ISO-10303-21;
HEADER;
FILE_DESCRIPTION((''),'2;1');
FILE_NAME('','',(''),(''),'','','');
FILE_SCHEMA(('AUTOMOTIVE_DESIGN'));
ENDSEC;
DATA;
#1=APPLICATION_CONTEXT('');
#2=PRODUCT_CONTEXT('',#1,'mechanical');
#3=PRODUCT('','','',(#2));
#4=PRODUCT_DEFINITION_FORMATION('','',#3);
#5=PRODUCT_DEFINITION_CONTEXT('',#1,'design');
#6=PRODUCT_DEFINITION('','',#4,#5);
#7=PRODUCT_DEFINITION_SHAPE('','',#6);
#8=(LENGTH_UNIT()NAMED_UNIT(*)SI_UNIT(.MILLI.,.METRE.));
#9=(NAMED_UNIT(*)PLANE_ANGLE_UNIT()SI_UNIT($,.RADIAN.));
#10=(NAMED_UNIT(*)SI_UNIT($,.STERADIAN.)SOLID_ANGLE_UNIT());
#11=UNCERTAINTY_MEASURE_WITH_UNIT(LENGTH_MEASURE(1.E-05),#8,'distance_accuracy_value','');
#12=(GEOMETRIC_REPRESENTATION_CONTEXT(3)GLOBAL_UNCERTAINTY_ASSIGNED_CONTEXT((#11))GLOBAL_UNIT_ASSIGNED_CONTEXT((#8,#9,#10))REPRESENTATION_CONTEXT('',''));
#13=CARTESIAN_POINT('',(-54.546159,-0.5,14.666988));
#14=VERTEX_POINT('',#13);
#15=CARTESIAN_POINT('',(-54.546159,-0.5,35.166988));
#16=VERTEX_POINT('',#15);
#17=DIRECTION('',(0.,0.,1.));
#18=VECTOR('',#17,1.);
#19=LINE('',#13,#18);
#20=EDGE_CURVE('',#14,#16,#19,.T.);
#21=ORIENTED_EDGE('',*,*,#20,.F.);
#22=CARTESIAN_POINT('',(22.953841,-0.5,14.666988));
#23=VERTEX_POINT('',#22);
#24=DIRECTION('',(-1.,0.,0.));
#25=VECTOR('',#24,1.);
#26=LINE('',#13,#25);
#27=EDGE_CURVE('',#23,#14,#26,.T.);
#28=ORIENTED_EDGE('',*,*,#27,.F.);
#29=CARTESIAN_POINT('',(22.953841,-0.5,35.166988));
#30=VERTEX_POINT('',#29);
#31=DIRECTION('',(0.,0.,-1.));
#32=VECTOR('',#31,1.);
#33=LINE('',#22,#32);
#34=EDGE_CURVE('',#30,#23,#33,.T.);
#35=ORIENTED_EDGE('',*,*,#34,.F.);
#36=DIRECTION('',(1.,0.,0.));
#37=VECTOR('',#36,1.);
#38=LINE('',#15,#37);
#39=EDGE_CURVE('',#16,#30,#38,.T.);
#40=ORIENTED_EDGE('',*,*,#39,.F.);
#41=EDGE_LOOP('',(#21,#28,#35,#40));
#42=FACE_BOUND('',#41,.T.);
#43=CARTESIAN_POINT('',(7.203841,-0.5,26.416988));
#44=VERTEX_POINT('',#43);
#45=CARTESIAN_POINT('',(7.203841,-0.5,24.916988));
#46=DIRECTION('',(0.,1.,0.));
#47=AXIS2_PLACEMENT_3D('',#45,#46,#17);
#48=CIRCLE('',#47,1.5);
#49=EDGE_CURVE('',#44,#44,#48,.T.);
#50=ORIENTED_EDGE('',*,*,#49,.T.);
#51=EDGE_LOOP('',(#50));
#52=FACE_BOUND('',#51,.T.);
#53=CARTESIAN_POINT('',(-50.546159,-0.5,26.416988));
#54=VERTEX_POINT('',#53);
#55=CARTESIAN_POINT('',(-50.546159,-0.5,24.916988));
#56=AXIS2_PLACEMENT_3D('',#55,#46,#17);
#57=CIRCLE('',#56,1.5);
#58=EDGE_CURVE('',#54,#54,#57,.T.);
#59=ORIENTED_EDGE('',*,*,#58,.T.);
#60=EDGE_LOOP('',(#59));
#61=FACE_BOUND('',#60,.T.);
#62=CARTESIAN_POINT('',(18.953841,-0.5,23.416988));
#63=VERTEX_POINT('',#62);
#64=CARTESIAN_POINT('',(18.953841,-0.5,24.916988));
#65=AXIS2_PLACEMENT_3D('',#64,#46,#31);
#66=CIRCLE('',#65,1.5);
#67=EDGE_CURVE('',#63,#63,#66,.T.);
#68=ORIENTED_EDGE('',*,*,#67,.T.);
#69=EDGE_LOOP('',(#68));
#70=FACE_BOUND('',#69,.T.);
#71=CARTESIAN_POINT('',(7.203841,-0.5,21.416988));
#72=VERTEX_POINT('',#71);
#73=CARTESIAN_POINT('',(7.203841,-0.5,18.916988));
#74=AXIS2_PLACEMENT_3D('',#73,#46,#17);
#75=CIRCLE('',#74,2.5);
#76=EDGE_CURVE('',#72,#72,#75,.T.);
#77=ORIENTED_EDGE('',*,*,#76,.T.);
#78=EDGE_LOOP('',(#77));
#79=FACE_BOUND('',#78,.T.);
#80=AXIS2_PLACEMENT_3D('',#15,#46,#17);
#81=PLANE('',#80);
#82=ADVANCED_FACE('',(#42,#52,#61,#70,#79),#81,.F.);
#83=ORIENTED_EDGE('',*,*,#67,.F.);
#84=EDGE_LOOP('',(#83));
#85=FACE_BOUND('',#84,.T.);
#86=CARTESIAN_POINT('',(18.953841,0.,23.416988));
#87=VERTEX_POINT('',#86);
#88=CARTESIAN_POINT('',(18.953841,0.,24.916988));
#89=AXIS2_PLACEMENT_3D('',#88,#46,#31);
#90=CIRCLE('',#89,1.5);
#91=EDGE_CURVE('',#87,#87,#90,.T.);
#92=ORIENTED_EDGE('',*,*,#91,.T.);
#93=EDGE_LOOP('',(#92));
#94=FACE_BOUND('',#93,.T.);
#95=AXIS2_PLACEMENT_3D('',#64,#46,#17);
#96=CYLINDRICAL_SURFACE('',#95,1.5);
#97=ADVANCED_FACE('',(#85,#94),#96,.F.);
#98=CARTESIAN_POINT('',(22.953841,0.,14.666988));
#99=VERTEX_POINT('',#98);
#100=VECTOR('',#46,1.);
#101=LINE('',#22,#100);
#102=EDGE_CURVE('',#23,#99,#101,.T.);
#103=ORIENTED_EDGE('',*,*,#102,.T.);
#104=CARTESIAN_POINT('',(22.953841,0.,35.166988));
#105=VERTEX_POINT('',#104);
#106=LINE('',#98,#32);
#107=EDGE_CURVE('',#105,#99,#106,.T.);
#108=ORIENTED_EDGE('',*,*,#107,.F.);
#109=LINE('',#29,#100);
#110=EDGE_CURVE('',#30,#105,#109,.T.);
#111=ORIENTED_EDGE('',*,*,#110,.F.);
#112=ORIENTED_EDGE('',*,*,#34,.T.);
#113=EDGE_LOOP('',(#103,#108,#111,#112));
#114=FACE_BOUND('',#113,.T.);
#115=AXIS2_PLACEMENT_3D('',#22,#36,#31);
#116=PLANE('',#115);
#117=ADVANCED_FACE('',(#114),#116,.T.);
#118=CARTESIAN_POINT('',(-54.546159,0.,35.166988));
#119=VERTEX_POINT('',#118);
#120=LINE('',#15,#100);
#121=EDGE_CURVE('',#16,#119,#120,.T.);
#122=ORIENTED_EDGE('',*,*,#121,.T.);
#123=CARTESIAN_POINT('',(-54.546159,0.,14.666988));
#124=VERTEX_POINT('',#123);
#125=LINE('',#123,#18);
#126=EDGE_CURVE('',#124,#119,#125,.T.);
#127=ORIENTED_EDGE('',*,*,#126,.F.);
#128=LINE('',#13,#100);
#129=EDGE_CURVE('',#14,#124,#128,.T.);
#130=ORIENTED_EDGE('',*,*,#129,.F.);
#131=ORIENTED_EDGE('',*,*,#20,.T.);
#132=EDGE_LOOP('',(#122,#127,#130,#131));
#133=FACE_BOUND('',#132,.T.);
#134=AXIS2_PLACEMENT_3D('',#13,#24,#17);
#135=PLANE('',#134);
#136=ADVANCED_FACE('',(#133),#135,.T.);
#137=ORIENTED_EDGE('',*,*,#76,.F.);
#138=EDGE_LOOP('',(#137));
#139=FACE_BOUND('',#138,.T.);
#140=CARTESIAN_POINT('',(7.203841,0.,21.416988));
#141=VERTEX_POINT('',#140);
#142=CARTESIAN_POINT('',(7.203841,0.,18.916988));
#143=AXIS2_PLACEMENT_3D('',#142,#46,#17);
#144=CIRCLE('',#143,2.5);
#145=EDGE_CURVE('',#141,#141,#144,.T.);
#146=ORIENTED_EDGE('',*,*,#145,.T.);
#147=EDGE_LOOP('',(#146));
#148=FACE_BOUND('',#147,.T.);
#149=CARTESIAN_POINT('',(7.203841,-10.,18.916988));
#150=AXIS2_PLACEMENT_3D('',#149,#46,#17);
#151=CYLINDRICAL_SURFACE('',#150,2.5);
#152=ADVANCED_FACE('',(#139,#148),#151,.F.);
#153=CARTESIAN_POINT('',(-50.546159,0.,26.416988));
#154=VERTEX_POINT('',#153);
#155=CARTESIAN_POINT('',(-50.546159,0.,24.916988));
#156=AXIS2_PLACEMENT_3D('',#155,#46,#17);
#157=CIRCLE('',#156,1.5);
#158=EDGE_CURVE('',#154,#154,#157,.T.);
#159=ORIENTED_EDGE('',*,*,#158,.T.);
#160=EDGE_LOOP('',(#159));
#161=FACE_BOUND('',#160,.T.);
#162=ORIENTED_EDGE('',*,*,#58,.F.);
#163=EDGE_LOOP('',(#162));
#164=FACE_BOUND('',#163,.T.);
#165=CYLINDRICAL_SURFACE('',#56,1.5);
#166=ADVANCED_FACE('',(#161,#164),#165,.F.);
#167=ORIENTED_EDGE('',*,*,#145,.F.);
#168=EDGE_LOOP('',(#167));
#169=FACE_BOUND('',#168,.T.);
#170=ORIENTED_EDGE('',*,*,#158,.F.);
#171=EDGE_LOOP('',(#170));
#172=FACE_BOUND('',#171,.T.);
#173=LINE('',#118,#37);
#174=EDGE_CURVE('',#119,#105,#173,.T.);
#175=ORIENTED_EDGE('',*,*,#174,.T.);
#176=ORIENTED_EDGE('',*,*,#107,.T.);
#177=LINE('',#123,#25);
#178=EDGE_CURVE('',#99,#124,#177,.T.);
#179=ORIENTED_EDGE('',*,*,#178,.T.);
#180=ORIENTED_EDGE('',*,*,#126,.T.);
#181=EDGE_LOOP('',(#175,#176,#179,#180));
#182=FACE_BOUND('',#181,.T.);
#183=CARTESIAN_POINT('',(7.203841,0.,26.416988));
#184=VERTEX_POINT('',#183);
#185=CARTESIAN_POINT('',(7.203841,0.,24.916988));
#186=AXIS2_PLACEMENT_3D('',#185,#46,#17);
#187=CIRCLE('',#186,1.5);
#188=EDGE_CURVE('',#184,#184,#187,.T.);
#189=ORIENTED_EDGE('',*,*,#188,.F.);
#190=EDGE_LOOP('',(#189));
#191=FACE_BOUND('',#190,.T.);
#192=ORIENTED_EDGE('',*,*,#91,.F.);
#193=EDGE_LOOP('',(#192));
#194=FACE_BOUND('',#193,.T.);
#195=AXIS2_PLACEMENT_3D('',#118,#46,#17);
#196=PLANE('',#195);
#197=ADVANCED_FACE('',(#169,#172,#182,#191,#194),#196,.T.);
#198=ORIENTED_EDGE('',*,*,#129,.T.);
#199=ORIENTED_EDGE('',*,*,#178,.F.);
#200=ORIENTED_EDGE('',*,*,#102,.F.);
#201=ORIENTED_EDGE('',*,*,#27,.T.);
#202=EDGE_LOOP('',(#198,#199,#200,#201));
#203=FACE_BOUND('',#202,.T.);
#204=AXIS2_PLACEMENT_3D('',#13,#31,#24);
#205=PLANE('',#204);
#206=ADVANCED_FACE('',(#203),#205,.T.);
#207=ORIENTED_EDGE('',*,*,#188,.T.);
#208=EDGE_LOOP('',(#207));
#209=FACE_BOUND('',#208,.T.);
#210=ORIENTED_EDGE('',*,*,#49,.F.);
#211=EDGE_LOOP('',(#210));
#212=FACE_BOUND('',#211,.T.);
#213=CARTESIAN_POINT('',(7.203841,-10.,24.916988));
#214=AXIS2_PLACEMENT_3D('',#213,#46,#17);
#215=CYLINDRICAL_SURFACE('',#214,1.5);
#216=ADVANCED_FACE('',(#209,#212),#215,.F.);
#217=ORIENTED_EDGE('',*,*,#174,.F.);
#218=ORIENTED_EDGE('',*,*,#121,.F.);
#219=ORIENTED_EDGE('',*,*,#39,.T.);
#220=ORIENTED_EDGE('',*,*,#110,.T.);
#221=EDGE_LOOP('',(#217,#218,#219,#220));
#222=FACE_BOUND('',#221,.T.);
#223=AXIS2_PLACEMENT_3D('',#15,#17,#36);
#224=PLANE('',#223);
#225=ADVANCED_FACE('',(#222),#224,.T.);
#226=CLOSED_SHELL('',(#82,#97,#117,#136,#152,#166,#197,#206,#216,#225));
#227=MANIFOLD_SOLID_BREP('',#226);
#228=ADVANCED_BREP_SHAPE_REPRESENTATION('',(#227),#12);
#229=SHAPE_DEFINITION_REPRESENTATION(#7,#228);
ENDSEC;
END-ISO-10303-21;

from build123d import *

# Parameters (mm, degrees)
CROQUIS1_W            = 77.5
CROQUIS1_H            = 20.5
CROQUIS1_R            = 1.5
BRIDA_BASE1_DEPTH     = 0.5
CROQUIS2_R            = 1.5
CROQUIS2_R_2          = 2.5
CORTAR_EXTRUIR1_DEPTH = 10


# Sheet-metal steps are written as plain solids
with BuildPart() as part:
    # Croquis1 → Brida base1 (new body)
    with BuildSketch(Plane(origin=(0, 0, 0), x_dir=(1, 0, 0), z_dir=(0, 1, 0))):
        with Locations((-15.796159052, -24.916988156)):
            Rectangle(CROQUIS1_W, CROQUIS1_H)
        with Locations(Location((-50.546159052, -24.916988156, 0), (0, 0, 270))):
            Circle(CROQUIS1_R, mode=Mode.SUBTRACT)
        with Locations(Location((18.953840948, -24.916988156, 0), (0, 0, 90))):
            Circle(CROQUIS1_R, mode=Mode.SUBTRACT)
    extrude(amount=-BRIDA_BASE1_DEPTH)

    # Croquis2 → Cortar-Extruir1 (cut)
    with BuildSketch(Plane(origin=(0, 0, 0), x_dir=(-1, 0, 0), z_dir=(0, 1, 0))):
        with Locations(Location((-7.203840948, 24.916988156, 0), (0, 0, 90))):
            Circle(CROQUIS2_R)
        with Locations(Location((-7.203840948, 18.916988156, 0), (0, 0, 90))):
            Circle(CROQUIS2_R_2)
    extrude(amount=-CORTAR_EXTRUIR1_DEPTH, mode=Mode.SUBTRACT)


solid = part.part
